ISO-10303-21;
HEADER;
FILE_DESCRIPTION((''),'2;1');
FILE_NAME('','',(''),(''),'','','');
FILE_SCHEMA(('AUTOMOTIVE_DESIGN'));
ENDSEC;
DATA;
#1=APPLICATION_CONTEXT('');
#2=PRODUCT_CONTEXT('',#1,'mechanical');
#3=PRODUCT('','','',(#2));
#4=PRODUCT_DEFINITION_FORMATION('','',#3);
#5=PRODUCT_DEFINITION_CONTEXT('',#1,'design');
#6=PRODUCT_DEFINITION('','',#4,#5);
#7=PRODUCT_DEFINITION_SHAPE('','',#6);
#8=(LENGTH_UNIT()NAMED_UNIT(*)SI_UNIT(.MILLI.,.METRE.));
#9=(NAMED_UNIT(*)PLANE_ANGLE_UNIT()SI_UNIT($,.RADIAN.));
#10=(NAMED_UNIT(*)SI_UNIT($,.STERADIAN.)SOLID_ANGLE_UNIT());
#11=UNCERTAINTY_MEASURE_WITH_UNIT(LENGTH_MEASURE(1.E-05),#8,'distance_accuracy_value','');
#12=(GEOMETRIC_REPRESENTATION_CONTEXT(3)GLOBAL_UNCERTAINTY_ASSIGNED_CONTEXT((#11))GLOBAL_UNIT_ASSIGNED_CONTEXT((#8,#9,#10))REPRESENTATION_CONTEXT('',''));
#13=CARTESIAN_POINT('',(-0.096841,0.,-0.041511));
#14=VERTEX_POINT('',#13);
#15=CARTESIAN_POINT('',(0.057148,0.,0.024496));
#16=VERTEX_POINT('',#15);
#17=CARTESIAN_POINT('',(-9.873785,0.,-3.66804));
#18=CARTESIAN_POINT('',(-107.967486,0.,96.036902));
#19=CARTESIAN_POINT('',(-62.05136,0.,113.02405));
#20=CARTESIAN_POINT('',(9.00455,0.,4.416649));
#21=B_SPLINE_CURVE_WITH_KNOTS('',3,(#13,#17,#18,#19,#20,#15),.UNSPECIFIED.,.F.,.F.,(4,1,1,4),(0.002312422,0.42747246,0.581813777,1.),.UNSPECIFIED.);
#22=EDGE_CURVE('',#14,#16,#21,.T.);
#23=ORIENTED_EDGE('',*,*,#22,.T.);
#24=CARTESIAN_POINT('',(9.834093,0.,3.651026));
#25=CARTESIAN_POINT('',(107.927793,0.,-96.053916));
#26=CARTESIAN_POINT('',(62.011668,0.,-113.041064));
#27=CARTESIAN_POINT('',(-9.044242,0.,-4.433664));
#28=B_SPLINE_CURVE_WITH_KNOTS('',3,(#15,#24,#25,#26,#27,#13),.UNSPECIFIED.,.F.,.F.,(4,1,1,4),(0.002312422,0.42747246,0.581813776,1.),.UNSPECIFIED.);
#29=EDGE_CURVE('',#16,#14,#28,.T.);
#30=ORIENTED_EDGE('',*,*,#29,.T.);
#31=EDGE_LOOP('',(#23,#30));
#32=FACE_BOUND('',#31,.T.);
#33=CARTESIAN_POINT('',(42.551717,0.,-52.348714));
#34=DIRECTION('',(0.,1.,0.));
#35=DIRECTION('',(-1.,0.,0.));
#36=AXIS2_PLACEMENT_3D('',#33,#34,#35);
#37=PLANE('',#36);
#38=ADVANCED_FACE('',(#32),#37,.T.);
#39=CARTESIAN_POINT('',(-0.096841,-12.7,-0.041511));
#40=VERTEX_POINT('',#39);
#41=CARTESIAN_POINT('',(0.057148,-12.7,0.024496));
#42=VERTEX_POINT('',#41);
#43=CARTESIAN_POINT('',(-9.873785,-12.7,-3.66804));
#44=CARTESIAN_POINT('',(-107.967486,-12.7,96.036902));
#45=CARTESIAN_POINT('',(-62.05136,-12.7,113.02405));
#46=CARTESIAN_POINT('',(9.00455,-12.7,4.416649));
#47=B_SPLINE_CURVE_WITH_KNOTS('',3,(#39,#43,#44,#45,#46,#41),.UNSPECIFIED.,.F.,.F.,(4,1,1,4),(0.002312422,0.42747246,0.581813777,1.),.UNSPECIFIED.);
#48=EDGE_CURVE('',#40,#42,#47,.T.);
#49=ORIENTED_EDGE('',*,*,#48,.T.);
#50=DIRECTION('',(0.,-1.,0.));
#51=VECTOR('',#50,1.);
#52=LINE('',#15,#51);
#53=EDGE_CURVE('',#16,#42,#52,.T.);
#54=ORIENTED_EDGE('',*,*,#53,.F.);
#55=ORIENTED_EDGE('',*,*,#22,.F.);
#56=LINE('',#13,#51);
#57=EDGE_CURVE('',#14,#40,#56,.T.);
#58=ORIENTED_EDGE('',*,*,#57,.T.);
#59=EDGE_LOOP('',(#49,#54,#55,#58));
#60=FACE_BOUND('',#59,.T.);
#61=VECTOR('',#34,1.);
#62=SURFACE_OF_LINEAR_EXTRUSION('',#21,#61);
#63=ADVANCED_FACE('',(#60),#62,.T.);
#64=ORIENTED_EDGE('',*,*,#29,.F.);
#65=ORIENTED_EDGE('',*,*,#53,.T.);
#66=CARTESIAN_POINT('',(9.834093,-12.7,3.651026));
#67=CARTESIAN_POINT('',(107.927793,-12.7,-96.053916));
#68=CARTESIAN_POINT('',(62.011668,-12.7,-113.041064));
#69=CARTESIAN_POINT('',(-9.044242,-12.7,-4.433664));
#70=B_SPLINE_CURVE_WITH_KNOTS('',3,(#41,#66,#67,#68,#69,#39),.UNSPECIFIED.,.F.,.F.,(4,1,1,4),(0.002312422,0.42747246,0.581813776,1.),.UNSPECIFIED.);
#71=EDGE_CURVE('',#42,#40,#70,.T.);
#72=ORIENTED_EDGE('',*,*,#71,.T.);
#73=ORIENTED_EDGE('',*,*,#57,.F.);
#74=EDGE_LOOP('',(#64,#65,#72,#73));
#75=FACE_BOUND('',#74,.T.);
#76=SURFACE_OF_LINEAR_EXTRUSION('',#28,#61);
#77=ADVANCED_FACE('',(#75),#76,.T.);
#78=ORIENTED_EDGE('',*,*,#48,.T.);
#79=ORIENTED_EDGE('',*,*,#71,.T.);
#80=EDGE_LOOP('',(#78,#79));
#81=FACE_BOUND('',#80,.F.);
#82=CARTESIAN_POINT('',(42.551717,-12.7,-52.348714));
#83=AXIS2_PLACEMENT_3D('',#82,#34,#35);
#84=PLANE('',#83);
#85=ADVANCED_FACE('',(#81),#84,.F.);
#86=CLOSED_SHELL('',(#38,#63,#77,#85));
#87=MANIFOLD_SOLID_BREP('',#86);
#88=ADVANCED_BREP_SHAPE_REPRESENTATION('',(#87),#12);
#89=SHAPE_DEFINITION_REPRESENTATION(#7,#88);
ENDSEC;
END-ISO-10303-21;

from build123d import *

# Parameters (mm, degrees)
F1_DEPTH = 12.7


# Not quite as in the source:
# - ends of sketch curves that miss each other by under 0.0002 mm in the source are joined


with BuildPart() as f1:
    # F0 (on Front) → F1 (new body)
    with BuildSketch(Plane.XZ):
        with BuildLine():
            add(Edge.make_bspline(
                [(0.057148097, 0.0244964621), (9.83409264, 3.651025559), (107.92779337, -96.0539163979), (62.01166785, -113.0410639025), (-9.0442422082, -4.4336636114), (-0.0968406225, -0.0415107744)],
                knots=[0.0023124215, 0.0023124215, 0.0023124215, 0.0023124215, 0.4274724605, 0.581813776, 1, 1, 1, 1], degree=3))
            add(Edge.make_bspline(
                [(0.057148097, 0.0244964621), (0.0076722315, 0.0002091649), (-0.0436642788, -0.0217865361), (-0.0968406225, -0.0415107744)],
                knots=[0, 0, 0, 0, 0.0023124215, 0.0023124215, 0.0023124215, 0.0023124215], degree=3))
        make_face()
        with BuildLine():
            add(Edge.make_bspline(
                [(-0.0968406225, -0.0415107744), (-0.0473646645, -0.0172237267), (0.0039718458, 0.0047719743), (0.057148097, 0.0244964621)],
                knots=[0, 0, 0, 0, 0.0023124215, 0.0023124215, 0.0023124215, 0.0023124215], degree=3))
            add(Edge.make_bspline(
                [(-0.0968406225, -0.0415107744), (-9.873785171, -3.6680401433), (-107.9674864943, 96.0369021462), (-62.0513603609, 113.0240496125), (9.0045498695, 4.4166490622), (0.057148097, 0.0244964621)],
                knots=[0.0023124215, 0.0023124215, 0.0023124215, 0.0023124215, 0.4274724602, 0.5818137766, 1, 1, 1, 1], degree=3))
        make_face()
        with BuildLine():
            add(Edge.make_bspline(
                [(0.0571481896, 0.0244962124), (0.0076722315, 0.0002091649), (-0.0436642788, -0.0217865361), (-0.0968405301, -0.0415110237)],
                knots=[0, 0, 0, 0, 0.0023124215, 0.0023124215, 0.0023124215, 0.0023124215], degree=3))
            add(Edge.make_bspline(
                [(-0.0968405301, -0.0415110237), (-0.0473646645, -0.0172237267), (0.0039718458, 0.0047719743), (0.0571481896, 0.0244962124)],
                knots=[0, 0, 0, 0, 0.0023124215, 0.0023124215, 0.0023124215, 0.0023124215], degree=3))
        make_face()
    extrude(amount=F1_DEPTH)


solid = f1.part
